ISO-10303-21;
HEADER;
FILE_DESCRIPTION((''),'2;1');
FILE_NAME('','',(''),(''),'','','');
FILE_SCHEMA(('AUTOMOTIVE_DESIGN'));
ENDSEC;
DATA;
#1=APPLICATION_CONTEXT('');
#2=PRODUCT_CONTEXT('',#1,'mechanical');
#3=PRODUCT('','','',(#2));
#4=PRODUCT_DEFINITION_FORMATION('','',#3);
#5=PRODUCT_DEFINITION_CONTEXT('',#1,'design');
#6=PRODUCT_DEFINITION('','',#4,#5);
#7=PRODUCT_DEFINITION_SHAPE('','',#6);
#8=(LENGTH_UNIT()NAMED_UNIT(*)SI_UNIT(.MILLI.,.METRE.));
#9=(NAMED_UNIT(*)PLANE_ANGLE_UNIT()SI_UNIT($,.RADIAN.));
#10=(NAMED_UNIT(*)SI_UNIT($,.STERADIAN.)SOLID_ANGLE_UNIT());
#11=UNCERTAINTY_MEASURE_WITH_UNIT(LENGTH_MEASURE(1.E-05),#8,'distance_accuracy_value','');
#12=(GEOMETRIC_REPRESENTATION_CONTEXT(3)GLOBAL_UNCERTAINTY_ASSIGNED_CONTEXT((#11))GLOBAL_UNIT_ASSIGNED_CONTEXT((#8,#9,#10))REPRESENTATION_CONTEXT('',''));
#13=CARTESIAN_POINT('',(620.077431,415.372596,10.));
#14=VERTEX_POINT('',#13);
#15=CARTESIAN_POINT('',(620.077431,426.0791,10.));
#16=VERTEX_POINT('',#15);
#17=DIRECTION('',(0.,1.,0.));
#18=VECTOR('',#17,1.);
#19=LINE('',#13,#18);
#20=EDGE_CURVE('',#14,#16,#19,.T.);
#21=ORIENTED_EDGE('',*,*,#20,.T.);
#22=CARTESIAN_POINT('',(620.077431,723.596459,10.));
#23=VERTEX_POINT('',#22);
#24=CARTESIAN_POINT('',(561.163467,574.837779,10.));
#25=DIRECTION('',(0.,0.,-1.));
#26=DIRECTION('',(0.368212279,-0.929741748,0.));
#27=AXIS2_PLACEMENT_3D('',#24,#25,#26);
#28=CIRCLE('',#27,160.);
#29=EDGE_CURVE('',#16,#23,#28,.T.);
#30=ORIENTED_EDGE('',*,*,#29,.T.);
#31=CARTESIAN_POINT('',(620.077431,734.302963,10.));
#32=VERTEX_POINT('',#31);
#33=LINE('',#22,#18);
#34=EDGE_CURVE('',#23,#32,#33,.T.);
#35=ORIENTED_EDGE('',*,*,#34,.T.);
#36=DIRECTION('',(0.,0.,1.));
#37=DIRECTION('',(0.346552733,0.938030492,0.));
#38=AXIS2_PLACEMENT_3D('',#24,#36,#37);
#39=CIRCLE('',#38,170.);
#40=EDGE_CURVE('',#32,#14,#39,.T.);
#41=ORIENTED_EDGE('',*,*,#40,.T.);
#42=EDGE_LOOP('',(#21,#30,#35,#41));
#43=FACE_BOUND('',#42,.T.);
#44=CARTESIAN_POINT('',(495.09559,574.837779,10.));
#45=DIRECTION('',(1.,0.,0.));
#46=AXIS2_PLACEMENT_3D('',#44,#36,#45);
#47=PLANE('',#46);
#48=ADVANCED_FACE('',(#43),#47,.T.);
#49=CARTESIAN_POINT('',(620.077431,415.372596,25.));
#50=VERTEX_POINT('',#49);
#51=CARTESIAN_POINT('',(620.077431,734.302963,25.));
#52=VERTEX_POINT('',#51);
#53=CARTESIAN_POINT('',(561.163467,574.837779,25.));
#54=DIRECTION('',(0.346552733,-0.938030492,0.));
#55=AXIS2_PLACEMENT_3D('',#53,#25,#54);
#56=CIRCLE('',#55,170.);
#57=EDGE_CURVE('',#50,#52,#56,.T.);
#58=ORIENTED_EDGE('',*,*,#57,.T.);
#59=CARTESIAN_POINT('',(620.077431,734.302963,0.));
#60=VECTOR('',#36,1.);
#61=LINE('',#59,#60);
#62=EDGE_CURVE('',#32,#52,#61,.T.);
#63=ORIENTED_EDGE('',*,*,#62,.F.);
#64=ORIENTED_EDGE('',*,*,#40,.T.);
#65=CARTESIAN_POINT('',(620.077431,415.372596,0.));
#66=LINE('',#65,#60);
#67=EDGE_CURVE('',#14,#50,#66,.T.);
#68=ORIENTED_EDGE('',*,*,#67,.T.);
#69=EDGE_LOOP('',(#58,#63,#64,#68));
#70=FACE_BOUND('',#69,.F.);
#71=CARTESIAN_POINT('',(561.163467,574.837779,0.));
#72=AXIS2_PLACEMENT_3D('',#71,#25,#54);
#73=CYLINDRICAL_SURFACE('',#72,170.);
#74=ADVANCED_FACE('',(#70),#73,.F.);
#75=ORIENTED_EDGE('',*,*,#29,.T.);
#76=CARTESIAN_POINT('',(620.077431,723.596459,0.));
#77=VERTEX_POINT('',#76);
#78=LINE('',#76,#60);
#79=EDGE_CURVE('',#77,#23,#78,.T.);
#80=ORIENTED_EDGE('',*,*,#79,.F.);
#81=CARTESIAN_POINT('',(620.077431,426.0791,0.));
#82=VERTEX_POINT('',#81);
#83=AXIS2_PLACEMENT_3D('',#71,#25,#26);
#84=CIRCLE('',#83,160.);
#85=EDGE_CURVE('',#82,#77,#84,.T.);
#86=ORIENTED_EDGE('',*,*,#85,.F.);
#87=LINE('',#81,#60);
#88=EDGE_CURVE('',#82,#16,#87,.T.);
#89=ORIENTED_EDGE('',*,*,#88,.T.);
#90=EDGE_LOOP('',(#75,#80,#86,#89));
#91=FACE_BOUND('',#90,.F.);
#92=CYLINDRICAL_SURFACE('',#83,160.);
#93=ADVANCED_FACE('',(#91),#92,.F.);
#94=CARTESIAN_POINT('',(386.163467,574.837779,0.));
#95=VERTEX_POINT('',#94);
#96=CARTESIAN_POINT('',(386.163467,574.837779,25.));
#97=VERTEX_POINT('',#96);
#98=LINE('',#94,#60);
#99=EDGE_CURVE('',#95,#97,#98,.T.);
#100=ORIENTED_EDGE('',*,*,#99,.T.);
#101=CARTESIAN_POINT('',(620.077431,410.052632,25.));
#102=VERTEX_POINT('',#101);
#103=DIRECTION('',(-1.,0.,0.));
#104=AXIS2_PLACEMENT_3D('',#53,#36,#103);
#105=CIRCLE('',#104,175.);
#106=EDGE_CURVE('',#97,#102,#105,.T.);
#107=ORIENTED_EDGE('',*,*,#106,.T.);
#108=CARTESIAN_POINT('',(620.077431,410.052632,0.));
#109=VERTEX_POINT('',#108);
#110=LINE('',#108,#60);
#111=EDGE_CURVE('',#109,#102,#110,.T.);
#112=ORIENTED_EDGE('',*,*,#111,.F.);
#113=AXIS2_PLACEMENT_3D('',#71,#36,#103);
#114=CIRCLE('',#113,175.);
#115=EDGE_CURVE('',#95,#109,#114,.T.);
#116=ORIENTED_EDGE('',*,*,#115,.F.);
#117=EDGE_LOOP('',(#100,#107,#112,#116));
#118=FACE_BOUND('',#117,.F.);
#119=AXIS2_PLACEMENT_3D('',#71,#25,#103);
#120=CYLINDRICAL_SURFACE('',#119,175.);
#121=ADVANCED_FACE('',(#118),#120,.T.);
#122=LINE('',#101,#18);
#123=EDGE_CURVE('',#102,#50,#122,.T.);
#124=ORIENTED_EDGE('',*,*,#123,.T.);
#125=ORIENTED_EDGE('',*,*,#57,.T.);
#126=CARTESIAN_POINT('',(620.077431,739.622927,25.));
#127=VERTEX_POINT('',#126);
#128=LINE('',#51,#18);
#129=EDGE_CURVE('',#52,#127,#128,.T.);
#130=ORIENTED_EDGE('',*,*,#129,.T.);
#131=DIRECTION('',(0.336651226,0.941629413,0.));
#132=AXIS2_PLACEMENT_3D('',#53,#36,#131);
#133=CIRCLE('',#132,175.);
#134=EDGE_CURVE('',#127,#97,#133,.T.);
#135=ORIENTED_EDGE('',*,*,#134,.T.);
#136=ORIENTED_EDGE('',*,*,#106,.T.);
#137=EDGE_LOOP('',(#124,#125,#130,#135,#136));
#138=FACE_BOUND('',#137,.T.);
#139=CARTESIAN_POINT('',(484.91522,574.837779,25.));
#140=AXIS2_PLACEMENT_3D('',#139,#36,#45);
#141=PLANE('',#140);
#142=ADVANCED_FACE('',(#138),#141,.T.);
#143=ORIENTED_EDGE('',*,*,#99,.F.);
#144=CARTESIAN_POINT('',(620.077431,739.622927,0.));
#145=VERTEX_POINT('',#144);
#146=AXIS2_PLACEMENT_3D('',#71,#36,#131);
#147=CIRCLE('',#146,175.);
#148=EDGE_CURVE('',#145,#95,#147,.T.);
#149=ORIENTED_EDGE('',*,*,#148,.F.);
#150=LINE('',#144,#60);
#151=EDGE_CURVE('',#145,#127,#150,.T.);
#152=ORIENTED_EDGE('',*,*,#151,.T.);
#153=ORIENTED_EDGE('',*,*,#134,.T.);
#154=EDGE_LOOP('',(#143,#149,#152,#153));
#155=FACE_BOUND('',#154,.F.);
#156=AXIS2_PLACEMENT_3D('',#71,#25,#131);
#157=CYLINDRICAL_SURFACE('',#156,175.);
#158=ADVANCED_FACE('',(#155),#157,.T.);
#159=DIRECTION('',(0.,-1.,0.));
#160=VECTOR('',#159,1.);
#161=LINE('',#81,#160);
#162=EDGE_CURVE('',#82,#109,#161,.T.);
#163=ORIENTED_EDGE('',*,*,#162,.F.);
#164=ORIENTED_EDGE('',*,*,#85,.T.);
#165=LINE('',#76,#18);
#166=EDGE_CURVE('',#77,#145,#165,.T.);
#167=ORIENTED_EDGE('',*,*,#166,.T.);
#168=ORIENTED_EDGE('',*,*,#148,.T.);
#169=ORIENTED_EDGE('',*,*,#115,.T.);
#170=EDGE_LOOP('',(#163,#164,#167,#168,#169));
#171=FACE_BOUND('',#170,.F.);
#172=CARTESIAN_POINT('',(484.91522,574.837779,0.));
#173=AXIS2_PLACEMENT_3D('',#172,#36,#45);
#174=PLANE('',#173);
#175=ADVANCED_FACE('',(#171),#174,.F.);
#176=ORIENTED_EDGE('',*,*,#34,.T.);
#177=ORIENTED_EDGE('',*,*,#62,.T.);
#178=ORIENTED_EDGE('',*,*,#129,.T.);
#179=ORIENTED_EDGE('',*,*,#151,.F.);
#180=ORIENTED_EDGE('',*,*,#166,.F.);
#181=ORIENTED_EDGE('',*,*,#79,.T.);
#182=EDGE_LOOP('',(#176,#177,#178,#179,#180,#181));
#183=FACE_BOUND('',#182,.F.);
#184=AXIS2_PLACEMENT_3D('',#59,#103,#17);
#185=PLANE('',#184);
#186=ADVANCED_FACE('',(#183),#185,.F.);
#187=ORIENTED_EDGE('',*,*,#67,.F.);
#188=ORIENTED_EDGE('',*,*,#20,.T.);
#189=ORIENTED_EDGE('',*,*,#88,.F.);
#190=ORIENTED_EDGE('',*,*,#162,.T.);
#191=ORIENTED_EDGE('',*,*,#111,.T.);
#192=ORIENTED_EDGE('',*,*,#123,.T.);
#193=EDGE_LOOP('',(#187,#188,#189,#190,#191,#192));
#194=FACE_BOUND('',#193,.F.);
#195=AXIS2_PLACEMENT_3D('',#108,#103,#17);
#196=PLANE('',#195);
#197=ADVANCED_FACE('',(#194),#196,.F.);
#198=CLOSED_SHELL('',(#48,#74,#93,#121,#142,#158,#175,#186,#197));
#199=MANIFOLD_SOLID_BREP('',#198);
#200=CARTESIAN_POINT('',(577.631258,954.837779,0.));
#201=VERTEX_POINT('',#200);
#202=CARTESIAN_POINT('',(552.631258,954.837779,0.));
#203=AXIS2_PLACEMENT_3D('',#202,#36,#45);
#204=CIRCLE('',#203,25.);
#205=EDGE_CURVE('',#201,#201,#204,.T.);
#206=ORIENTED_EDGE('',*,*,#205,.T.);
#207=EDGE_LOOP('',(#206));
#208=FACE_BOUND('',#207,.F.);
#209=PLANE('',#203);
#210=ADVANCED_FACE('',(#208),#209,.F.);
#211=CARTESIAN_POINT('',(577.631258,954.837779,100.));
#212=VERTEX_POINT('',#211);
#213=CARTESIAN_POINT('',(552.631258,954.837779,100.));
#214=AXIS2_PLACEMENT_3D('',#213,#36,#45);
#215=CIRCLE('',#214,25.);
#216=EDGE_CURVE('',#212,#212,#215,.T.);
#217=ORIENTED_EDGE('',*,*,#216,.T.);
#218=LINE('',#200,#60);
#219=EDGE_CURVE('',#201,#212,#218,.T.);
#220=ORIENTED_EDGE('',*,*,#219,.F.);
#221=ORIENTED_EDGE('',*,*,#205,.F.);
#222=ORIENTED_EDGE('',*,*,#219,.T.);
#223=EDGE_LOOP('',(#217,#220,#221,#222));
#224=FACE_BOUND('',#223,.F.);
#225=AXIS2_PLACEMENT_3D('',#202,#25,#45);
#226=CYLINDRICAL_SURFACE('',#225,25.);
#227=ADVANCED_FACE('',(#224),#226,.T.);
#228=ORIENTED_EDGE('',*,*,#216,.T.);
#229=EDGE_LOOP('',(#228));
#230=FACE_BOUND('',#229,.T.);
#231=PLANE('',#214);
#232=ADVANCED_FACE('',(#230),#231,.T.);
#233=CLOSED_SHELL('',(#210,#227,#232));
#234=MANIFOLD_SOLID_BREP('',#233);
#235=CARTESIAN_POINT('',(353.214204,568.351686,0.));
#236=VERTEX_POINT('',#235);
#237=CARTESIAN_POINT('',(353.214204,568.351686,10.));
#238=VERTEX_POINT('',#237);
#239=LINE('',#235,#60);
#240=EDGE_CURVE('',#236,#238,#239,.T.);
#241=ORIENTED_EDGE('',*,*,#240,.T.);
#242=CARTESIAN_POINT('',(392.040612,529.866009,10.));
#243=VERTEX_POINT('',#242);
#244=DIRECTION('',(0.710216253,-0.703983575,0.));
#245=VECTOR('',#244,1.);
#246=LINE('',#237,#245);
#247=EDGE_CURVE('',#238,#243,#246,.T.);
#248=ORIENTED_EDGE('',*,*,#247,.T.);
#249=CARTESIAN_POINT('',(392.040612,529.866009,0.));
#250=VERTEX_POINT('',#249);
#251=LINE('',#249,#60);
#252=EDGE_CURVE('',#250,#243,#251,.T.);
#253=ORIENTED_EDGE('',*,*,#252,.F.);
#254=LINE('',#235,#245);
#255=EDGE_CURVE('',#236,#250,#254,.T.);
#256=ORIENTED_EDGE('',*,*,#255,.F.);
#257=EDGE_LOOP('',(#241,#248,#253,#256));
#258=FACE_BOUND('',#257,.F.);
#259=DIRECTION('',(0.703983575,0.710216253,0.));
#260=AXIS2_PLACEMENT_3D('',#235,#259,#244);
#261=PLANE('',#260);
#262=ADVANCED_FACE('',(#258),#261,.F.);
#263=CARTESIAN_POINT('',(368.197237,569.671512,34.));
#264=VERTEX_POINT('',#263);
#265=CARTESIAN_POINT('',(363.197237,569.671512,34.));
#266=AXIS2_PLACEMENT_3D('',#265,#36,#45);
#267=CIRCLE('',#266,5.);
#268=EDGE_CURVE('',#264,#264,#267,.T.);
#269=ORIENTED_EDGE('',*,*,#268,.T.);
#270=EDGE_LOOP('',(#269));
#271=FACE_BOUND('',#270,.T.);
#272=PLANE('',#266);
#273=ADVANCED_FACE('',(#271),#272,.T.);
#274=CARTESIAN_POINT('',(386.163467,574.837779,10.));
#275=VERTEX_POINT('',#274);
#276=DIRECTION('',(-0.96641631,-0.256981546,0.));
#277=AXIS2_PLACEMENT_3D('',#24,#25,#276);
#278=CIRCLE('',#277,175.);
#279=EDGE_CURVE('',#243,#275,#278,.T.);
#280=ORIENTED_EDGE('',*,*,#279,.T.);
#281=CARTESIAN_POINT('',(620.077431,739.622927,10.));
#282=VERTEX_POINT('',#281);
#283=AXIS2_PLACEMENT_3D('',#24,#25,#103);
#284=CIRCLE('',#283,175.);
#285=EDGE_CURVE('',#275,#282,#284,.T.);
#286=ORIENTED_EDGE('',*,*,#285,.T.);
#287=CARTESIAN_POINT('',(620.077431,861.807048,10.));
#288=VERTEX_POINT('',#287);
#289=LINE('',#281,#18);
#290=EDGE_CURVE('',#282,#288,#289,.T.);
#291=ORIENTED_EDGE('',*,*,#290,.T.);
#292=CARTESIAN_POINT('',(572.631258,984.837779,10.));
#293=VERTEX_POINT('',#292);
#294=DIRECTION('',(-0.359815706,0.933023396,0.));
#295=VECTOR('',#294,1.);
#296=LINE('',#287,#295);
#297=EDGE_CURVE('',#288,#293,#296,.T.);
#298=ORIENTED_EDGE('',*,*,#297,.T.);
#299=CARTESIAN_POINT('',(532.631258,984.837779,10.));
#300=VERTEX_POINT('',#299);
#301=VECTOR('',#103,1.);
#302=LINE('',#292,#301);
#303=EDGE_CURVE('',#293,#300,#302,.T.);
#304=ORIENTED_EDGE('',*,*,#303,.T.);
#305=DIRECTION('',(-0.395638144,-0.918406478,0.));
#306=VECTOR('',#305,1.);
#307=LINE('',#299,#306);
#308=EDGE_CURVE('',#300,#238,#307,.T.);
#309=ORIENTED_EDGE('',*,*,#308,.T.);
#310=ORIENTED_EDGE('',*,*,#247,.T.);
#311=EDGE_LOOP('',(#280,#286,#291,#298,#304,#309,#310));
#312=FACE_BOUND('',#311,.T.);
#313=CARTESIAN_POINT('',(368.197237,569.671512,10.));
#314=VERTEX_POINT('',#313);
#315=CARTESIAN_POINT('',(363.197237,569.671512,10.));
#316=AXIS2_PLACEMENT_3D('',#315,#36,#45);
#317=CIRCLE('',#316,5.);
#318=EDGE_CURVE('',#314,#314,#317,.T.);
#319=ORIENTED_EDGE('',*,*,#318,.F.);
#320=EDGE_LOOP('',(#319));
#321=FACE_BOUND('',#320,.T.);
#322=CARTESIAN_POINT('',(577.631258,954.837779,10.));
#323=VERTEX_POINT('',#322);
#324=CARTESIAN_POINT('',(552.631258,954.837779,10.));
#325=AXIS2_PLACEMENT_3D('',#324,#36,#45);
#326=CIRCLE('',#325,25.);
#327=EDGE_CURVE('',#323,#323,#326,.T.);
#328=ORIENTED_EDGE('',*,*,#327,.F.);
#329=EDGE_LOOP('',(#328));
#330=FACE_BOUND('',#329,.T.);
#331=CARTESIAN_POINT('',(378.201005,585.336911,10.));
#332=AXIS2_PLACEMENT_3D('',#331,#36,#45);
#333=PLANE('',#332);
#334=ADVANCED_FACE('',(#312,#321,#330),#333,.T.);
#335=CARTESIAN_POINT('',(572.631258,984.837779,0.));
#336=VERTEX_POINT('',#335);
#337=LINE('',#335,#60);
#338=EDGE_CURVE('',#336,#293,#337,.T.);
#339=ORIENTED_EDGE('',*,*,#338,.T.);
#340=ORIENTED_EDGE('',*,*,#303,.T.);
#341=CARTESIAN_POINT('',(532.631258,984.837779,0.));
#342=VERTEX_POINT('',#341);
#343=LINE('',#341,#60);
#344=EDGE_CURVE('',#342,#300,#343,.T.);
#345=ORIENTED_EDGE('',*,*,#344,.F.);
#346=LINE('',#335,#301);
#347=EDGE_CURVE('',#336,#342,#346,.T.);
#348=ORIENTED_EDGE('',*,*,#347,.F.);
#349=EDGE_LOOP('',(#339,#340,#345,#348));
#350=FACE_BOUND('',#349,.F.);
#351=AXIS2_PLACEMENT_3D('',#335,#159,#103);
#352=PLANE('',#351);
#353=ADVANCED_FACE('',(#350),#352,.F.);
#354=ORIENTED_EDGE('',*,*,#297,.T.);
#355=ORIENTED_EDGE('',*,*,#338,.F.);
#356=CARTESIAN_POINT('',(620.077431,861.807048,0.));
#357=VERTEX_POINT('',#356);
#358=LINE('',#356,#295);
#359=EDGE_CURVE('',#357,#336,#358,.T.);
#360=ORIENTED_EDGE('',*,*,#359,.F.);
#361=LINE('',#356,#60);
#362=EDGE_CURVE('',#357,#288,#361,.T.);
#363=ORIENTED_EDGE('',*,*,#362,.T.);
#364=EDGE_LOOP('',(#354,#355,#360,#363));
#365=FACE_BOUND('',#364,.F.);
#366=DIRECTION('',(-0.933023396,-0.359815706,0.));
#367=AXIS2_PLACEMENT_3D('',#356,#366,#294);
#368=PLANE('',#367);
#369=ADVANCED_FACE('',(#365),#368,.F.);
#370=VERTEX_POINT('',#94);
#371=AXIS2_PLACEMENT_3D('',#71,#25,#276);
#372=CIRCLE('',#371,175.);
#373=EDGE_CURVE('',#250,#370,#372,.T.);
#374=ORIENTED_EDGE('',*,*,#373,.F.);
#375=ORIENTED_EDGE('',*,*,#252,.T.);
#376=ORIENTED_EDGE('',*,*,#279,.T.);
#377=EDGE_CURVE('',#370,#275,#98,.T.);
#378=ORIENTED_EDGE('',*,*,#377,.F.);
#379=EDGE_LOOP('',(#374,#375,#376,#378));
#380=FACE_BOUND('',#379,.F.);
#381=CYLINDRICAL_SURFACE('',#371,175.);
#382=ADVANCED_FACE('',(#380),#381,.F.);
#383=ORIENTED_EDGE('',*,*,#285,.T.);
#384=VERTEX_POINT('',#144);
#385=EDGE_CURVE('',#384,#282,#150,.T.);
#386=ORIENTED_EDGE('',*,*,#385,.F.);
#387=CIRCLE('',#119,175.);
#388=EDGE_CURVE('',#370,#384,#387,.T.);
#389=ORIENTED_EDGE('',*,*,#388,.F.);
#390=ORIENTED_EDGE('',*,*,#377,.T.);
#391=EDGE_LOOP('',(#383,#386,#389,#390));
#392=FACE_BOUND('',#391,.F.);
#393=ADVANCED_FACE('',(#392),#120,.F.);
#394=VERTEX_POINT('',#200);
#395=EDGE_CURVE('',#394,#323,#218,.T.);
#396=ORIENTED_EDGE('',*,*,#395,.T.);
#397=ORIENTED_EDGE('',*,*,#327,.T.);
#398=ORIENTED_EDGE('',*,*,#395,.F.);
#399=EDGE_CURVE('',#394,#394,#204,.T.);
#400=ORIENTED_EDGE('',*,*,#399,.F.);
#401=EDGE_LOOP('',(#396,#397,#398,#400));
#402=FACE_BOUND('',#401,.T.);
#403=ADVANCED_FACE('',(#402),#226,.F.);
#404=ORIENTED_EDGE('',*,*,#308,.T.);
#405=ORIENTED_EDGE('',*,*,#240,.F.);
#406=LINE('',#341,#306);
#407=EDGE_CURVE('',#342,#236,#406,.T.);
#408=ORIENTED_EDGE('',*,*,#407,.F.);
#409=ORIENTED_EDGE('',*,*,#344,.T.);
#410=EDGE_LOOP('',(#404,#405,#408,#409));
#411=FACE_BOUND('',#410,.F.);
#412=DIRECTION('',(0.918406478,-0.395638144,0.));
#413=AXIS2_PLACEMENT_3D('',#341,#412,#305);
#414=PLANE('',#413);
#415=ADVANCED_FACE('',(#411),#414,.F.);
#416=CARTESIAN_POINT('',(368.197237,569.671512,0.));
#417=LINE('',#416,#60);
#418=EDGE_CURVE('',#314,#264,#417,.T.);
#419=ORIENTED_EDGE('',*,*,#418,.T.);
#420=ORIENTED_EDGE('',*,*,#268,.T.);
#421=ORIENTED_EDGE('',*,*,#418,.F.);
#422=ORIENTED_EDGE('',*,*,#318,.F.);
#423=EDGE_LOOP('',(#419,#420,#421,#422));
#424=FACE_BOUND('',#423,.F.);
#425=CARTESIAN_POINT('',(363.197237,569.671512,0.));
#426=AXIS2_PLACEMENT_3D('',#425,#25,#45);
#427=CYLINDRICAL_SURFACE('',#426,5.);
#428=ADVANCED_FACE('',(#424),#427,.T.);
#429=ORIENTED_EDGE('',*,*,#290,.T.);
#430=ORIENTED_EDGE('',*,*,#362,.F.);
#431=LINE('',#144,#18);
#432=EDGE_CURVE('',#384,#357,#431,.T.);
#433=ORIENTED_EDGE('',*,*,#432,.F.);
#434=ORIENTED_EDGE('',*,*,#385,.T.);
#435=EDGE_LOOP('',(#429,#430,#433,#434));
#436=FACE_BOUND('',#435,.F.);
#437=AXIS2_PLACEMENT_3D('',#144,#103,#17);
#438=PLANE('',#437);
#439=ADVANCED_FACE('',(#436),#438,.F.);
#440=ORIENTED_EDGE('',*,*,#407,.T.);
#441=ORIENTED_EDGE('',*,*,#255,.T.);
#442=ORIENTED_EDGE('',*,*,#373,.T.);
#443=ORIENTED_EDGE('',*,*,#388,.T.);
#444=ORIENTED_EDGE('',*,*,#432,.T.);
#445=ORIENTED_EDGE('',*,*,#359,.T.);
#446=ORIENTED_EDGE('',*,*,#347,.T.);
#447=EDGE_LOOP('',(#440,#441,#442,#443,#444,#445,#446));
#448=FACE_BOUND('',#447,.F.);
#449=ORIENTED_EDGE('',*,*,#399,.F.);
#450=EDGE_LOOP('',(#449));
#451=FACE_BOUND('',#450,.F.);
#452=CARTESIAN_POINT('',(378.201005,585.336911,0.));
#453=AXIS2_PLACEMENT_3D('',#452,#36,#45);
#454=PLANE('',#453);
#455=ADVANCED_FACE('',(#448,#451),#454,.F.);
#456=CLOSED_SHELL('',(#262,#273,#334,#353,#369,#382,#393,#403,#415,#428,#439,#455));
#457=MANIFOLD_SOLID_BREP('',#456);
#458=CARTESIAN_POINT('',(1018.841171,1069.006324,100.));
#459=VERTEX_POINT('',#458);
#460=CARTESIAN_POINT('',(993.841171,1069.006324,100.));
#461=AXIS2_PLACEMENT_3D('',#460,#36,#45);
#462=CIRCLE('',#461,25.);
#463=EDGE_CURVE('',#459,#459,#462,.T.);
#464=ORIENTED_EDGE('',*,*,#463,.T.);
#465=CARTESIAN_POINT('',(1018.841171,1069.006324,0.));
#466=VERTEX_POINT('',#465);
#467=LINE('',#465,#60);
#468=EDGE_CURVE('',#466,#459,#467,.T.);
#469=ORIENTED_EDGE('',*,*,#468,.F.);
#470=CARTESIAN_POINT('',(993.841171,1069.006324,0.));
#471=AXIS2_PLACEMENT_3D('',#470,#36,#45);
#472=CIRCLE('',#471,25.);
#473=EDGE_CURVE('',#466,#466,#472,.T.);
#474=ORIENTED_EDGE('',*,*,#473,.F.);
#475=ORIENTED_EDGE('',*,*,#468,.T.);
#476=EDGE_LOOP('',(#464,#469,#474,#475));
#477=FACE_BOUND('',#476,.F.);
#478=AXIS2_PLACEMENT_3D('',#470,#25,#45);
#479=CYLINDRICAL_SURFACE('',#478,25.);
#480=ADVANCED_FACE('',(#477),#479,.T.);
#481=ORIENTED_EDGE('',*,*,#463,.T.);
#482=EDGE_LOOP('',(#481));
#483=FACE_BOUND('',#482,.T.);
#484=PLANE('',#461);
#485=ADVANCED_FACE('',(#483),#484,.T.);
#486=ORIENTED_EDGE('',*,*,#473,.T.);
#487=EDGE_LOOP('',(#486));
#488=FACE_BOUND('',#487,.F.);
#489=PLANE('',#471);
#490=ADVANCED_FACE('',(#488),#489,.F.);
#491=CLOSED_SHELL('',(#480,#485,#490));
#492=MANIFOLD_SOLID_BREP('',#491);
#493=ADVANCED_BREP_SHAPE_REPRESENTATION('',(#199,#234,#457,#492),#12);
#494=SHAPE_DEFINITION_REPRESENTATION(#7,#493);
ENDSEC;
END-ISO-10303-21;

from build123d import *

# Parameters (mm, degrees)
F1_DEPTH = 10
F2_DEPTH = 25
F0_R     = 25
F3_DEPTH = 100
F0_R_2   = 5
F4_DEPTH = 10
F5_DEPTH = 34
F6_DEPTH = 100


# Not quite as in the source:
# - a feature names something its author has since deleted; it is built from what else it names


with BuildPart() as f1:
    # F0 (on Top) → F1 (new body)
    with BuildSketch(Plane.XY):
        with BuildLine():
            Line((620.0774312019, 723.5964589473), (620.0774312019, 734.3029628668))
            ThreePointArc((620.0774312019, 734.3029628668), (391.1634666106, 574.8377792808), (620.0774312019, 415.3725956948))
            Line((620.0774312019, 415.3725956948), (620.0774312019, 426.0790996143))
            ThreePointArc((620.0774312019, 426.0790996143), (401.1634666106, 574.8377792808), (620.0774312019, 723.5964589473))
        make_face()
    extrude(amount=F1_DEPTH)

    # F0 (on Top) → F2 (join)
    with BuildSketch(Plane.XY):
        with BuildLine():
            Line((620.0774312019, 734.3029628668), (620.0774312019, 739.6229265973))
            ThreePointArc((620.0774312019, 739.6229265973), (460.3789038132, 717.9023517708), (386.1634666106, 574.8377792808))
            ThreePointArc((386.1634666106, 574.8377792808), (387.6389733709, 552.1606929179), (392.0406122781, 529.8660087749))
            ThreePointArc((392.0406122781, 529.8660087749), (479.7674522107, 419.9194497009), (620.0774312019, 410.0526319643))
            Line((620.0774312019, 410.0526319643), (620.0774312019, 415.3725956948))
            ThreePointArc((620.0774312019, 415.3725956948), (391.1634666106, 574.8377792808), (620.0774312019, 734.3029628668))
        make_face()
    extrude(amount=F2_DEPTH)


with BuildPart() as f3:
    # F0 (on Top) → F3 (new body)
    with BuildSketch(Plane.XY):
        with Locations((552.6312583531, 954.8377792808)):
            Circle(F0_R)
    extrude(amount=F3_DEPTH)


with BuildPart() as f4:
    # F0 (on Top) → F4 (new body)
    with BuildSketch(Plane.XY):
        with BuildLine():
            ThreePointArc((392.0406122781, 529.8660087749), (387.6389733709, 552.1606929179), (386.1634666106, 574.8377792808))
            Line((386.1634666106, 574.8377792808), (386.1634666106, 644.8377792808))
            Line((386.1634666106, 644.8377792808), (353.2142043114, 568.3516860008))
            Line((353.2142043114, 568.3516860008), (392.0406122781, 529.8660087749))
        make_face()
        with Locations((363.1972372532, 569.6715116501)):
            Circle(F0_R_2, mode=Mode.SUBTRACT)
        with BuildLine():
            ThreePointArc((386.1634666106, 574.8377792808), (460.3789038132, 717.9023517708), (620.0774312019, 739.6229265973))
            Line((620.0774312019, 739.6229265973), (620.0774312019, 861.8070483208))
            Line((620.0774312019, 861.8070483208), (572.6312583531, 984.8377792808))
            Line((572.6312583531, 984.8377792808), (532.6312583531, 984.8377792808))
            Line((532.6312583531, 984.8377792808), (386.1634666106, 644.8377792808))
            Line((386.1634666106, 644.8377792808), (386.1634666106, 574.8377792808))
        make_face()
        with Locations((552.6312583531, 954.8377792808)):
            Circle(F0_R, mode=Mode.SUBTRACT)
    extrude(amount=F4_DEPTH)

    # F0 (on Top) → F5 (join)
    with BuildSketch(Plane.XY):
        with Locations((363.1972372532, 569.6715116501)):
            Circle(F0_R_2)
    extrude(amount=F5_DEPTH)


with BuildPart() as f6:
    # F0 (on Top) → F6 (new body)
    with BuildSketch(Plane.XY):
        with Locations((993.8411712646, 1069.0063238144)):
            Circle(F0_R)
    extrude(amount=F6_DEPTH)


solid = Compound([f1.part, f3.part, f4.part, f6.part])
